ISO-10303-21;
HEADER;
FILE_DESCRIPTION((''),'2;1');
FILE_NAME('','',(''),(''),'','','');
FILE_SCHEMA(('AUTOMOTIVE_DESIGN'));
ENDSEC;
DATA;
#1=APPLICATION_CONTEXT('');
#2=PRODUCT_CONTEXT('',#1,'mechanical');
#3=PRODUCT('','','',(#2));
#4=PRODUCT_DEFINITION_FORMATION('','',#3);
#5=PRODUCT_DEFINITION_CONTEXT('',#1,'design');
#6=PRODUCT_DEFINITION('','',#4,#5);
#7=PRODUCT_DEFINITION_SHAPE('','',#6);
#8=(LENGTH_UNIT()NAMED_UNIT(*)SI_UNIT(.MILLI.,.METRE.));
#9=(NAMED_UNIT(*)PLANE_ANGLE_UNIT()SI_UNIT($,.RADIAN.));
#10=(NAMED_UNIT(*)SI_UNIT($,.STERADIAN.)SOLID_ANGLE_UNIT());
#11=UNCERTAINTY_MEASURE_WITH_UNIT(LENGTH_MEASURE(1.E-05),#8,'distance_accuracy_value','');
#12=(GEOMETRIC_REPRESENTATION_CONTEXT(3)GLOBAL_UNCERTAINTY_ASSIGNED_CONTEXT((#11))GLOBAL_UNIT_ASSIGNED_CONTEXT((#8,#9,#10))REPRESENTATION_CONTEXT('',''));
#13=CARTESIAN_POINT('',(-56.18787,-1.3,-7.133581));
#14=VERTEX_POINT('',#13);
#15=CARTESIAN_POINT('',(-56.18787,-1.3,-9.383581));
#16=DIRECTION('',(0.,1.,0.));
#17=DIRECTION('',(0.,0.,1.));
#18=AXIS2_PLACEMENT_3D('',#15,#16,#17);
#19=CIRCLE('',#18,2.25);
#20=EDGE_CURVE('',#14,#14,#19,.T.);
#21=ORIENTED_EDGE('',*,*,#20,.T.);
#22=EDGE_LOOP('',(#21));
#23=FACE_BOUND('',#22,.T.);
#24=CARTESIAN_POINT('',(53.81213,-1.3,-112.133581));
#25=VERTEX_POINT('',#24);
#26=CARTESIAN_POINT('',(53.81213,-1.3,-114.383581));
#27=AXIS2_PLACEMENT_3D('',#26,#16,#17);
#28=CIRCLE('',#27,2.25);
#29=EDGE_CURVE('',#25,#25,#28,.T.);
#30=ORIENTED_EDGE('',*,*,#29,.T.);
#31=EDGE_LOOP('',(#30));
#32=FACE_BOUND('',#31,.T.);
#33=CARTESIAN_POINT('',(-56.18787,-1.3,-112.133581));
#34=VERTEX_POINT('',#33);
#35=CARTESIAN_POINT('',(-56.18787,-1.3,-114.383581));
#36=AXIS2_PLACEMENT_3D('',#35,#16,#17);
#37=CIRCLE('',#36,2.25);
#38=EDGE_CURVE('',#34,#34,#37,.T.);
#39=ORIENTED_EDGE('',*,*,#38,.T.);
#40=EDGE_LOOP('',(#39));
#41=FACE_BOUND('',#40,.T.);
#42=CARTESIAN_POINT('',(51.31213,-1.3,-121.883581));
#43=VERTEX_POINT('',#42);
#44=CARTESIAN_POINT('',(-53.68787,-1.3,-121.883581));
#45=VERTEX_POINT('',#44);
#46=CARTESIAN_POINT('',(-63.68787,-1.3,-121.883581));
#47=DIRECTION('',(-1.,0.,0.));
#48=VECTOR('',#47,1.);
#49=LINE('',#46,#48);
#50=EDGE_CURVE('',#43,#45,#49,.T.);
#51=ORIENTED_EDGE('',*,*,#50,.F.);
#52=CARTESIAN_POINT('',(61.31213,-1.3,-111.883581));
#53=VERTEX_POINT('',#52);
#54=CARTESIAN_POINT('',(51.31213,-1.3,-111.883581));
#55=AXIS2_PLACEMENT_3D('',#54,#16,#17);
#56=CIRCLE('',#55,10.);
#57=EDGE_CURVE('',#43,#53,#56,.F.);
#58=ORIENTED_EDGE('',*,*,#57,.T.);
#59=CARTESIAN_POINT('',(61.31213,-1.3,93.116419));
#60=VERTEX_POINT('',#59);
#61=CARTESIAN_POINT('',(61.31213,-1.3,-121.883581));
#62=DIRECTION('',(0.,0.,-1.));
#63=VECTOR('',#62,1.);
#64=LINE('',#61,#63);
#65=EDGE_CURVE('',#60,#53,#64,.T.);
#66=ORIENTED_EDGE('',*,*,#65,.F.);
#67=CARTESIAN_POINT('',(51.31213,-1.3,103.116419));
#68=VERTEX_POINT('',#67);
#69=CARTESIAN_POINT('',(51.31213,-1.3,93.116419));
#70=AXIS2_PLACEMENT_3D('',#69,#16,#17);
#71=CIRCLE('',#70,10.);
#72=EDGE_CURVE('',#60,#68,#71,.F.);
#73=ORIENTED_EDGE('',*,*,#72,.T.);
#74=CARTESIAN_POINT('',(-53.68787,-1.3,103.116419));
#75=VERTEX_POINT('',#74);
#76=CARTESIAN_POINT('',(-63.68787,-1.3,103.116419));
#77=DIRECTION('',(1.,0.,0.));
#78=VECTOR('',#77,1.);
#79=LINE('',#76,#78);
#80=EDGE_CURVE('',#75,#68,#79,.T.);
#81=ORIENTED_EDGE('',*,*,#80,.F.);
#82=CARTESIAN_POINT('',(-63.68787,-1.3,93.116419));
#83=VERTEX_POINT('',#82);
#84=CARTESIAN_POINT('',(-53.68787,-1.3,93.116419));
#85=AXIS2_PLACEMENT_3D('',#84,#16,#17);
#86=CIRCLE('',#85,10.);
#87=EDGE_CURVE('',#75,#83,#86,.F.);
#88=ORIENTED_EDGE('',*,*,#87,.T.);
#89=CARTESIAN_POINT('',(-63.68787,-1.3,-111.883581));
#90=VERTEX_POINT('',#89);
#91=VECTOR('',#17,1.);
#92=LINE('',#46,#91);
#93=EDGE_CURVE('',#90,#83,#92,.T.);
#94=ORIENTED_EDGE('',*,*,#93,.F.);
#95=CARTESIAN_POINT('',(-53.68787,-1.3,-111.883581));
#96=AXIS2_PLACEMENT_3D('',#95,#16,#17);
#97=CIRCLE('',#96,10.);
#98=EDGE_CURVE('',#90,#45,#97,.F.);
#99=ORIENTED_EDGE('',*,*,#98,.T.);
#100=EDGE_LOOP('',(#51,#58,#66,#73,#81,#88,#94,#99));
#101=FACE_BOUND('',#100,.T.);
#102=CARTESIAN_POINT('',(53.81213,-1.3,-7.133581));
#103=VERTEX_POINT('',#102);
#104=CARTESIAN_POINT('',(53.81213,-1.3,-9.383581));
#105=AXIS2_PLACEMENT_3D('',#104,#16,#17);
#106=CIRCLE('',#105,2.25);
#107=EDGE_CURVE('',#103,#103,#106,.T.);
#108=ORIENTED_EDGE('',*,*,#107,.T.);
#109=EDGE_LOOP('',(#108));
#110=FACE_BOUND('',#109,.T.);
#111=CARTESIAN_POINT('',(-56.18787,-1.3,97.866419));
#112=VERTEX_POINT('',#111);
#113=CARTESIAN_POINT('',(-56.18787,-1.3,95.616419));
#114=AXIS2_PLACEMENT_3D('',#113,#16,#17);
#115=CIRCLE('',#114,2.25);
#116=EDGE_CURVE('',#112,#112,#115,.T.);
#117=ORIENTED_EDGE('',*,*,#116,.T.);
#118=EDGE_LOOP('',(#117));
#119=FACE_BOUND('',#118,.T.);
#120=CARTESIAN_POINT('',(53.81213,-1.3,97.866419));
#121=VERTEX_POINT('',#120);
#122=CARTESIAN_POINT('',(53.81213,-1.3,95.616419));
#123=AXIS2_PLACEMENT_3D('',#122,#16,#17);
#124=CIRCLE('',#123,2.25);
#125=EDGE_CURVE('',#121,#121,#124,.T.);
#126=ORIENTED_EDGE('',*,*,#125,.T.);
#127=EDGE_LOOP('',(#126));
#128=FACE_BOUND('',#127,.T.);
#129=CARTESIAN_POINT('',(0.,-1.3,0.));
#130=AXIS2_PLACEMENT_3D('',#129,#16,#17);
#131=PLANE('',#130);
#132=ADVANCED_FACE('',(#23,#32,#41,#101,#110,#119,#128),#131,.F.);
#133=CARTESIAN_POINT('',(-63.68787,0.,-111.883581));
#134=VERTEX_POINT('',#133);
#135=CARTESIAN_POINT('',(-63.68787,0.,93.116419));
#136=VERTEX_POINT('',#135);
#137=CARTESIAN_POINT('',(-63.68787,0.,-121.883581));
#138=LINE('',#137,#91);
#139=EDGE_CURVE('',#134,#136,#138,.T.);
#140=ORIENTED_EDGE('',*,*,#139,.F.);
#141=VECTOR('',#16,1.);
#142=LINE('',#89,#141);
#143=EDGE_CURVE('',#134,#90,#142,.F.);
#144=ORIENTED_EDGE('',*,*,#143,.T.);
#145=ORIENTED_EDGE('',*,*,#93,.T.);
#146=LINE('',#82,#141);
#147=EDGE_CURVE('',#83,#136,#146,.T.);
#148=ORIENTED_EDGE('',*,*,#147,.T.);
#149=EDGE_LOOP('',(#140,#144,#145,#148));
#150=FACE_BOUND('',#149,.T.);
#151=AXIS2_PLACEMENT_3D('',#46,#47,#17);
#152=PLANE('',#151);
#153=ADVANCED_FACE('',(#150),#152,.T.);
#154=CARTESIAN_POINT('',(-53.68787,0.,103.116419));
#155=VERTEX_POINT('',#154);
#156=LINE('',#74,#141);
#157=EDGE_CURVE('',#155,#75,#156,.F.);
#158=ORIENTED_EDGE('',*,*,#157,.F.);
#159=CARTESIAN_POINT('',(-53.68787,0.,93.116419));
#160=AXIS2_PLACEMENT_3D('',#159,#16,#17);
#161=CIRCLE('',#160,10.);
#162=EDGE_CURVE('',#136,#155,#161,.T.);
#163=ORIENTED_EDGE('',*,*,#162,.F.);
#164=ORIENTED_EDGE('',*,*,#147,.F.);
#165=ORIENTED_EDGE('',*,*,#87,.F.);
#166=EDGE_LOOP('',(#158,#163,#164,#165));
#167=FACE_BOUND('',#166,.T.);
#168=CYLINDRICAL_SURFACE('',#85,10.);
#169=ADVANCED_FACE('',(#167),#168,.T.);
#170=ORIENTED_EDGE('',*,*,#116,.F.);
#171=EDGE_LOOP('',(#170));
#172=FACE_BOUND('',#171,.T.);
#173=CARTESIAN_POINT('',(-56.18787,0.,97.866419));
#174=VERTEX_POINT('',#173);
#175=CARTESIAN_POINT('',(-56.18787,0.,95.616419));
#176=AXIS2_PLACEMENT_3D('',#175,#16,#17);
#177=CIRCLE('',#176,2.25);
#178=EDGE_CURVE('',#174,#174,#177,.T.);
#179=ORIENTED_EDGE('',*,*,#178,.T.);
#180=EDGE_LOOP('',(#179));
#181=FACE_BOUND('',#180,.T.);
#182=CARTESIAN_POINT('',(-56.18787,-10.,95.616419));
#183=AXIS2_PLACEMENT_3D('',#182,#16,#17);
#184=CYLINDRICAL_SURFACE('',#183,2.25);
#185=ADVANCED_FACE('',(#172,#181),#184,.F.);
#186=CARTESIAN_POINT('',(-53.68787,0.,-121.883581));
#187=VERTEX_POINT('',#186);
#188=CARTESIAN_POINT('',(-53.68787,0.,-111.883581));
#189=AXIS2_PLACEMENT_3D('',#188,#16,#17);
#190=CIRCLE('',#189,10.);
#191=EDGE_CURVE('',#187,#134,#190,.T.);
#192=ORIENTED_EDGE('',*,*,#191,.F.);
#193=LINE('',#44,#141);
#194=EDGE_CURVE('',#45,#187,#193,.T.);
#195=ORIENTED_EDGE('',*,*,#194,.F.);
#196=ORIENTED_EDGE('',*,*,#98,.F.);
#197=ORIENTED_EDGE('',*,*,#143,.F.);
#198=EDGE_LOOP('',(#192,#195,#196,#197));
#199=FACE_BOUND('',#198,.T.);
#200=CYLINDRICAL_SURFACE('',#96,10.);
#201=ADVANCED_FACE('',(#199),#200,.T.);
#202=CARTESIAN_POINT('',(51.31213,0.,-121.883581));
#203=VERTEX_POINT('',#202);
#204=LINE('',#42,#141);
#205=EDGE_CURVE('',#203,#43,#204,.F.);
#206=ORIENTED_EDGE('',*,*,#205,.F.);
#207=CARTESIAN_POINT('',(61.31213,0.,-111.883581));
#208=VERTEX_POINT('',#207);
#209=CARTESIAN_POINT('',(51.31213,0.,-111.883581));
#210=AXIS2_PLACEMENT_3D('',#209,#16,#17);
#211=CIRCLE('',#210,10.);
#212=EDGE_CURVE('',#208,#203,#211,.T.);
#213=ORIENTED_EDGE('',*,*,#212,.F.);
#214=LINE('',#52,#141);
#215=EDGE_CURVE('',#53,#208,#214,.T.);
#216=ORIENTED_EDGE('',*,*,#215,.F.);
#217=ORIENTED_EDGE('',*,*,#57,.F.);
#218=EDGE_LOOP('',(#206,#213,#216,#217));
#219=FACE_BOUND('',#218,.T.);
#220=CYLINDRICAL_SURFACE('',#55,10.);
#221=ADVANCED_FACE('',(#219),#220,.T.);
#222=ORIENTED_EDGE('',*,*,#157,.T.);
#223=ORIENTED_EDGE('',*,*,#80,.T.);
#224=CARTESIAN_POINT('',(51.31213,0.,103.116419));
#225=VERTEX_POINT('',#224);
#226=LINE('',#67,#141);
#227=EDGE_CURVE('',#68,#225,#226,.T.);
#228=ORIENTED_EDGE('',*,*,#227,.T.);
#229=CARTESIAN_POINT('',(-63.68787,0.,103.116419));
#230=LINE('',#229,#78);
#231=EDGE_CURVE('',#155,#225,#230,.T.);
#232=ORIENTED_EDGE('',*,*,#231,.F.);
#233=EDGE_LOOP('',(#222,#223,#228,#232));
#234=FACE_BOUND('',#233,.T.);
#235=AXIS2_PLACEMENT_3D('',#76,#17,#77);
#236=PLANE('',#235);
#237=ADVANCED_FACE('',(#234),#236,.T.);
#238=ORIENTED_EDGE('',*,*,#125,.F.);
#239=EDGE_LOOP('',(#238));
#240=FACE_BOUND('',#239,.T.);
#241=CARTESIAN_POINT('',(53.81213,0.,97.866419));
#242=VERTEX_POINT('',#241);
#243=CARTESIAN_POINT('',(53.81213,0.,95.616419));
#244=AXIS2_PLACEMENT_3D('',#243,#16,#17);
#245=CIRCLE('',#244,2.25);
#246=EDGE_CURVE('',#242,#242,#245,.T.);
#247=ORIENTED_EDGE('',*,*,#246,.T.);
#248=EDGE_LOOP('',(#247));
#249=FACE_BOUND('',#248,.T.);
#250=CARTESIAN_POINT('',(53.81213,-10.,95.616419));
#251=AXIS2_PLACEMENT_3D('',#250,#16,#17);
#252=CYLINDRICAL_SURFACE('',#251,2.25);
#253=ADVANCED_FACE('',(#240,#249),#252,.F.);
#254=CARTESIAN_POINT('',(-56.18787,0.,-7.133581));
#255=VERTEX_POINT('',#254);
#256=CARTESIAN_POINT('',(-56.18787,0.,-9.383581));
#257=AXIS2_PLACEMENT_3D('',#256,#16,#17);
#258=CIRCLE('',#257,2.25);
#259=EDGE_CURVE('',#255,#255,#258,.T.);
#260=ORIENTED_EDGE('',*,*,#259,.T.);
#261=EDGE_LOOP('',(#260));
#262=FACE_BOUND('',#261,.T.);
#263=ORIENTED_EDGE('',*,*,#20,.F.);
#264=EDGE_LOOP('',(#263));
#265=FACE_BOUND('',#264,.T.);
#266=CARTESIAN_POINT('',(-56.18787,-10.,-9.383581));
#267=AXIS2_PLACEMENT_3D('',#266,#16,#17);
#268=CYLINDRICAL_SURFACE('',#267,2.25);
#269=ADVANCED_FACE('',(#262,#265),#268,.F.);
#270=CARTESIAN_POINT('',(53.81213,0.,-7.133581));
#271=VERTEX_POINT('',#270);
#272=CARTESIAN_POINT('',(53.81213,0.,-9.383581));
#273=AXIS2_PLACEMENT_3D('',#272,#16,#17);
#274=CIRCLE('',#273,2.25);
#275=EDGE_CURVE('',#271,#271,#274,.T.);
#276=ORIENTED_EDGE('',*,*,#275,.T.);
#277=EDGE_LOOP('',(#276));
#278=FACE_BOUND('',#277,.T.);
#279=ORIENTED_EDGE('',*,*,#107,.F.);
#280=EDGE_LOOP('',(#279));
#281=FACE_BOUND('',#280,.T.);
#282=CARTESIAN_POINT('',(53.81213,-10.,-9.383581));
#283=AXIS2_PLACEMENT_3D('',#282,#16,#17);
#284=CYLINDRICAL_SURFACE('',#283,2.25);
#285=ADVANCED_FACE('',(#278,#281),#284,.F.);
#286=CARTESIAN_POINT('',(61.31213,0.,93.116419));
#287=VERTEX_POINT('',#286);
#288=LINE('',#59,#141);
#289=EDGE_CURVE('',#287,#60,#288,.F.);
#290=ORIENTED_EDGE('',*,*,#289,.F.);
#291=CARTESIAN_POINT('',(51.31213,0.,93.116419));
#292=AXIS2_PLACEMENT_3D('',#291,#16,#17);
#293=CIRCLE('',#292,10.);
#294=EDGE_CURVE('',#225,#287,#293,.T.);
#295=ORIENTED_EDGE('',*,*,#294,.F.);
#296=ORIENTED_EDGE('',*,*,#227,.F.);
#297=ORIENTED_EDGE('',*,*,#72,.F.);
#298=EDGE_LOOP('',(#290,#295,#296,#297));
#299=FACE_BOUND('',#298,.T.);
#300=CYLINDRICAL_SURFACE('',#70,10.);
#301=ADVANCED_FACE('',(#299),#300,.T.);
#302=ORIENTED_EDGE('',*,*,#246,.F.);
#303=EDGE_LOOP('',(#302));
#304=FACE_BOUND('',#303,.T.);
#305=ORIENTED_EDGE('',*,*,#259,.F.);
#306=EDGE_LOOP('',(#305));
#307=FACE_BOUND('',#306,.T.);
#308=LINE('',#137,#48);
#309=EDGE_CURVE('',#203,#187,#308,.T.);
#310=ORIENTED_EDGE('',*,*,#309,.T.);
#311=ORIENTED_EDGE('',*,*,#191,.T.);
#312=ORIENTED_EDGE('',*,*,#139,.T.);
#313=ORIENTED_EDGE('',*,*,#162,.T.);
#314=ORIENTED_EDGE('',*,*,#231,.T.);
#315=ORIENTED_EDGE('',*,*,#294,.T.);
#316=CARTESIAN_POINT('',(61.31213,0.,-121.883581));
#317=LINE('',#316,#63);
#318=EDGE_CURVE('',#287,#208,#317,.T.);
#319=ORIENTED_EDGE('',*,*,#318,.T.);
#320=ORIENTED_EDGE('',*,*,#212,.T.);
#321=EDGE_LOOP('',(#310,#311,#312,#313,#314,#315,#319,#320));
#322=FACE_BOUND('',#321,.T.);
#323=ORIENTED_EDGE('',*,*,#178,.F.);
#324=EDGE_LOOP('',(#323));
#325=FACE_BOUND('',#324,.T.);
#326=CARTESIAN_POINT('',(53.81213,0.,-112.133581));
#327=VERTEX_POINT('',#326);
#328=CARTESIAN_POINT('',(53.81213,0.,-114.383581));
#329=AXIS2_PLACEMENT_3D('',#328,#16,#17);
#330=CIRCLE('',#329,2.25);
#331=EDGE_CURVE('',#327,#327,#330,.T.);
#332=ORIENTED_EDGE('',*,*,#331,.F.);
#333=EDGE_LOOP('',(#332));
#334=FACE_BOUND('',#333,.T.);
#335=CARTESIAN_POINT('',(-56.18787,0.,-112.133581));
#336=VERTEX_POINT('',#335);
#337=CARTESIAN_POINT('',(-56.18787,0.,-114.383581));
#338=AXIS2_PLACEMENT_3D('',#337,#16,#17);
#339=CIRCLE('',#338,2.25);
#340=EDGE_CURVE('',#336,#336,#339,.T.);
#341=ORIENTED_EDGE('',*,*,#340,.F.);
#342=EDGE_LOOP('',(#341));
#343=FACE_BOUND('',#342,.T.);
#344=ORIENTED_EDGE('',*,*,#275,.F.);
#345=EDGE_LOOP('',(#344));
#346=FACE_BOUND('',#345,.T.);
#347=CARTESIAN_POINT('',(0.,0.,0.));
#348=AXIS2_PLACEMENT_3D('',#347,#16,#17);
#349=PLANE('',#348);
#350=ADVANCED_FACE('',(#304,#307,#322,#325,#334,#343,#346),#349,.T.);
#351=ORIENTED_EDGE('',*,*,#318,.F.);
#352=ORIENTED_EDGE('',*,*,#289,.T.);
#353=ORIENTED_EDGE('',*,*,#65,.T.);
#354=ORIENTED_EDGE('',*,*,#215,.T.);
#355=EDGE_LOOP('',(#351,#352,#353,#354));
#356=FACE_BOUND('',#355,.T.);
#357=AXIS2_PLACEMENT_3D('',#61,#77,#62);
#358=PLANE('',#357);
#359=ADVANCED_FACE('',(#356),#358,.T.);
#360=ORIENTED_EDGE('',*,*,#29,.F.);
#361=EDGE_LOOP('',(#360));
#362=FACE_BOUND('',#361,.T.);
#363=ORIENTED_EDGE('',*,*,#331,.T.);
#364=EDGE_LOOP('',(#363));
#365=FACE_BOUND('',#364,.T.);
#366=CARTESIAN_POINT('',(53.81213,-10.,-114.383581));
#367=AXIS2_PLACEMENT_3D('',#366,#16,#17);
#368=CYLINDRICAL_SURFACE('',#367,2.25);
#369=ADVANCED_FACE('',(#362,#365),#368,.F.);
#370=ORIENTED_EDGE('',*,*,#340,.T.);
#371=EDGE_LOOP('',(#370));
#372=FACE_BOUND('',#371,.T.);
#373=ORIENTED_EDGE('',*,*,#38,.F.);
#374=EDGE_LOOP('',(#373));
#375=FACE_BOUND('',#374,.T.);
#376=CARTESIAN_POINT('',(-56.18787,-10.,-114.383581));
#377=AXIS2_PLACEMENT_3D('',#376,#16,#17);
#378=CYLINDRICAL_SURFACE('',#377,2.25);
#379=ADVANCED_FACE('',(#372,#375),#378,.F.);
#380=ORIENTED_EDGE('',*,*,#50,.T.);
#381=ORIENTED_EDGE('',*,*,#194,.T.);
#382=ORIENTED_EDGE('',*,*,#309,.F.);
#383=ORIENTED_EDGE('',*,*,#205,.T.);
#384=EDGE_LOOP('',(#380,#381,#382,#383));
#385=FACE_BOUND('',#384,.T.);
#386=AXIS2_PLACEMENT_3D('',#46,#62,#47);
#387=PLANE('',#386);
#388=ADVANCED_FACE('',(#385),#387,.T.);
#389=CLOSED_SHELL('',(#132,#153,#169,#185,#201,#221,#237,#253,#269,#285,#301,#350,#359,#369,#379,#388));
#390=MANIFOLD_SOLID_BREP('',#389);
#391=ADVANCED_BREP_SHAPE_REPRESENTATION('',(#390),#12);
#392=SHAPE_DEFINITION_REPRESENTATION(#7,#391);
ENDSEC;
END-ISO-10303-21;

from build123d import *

# Parameters (mm, degrees)
SKETCH1_W          = 125
SKETCH1_H          = 225
BASE_FLANGE1_DEPTH = 1.3
SKETCH6_R          = 2.25
CUT_EXTRUDE1_DEPTH = 10
FILLET1_R          = 10


# Sheet-metal steps are written as plain solids
with BuildPart() as part:
    # Sketch1 → Base-Flange1 (new body)
    with BuildSketch(Plane(origin=(0, 0, 0), x_dir=(1, 0, 0), z_dir=(0, 1, 0))):
        with Locations((-1.187869711, 9.383580575)):
            Rectangle(SKETCH1_W, SKETCH1_H)
    extrude(amount=-BASE_FLANGE1_DEPTH)

    # Sketch6 → Cut-Extrude1 (cut)
    with BuildSketch(Plane(origin=(0, 0, 0), x_dir=(1, 0, 0), z_dir=(0, 1, 0))):
        with Locations(Location((53.812130289, 114.383580575, 0), (0, 0, 270))):
            Circle(SKETCH6_R)
        with Locations(Location((53.812130289, -95.616419425, 0), (0, 0, 270))):
            Circle(SKETCH6_R)
        with Locations(Location((-56.187869711, -95.616419425, 0), (0, 0, 270))):
            Circle(SKETCH6_R)
        with Locations(Location((-56.187869711, 114.383580575, 0), (0, 0, 270))):
            Circle(SKETCH6_R)
        with Locations(Location((53.812130289, 9.383580575, 0), (0, 0, 270))):
            Circle(SKETCH6_R)
        with Locations(Location((-56.187869711, 9.383580575, 0), (0, 0, 270))):
            Circle(SKETCH6_R)
    extrude(amount=-CUT_EXTRUDE1_DEPTH, mode=Mode.SUBTRACT)

    # Fillet1
    fillet1_edges = [part.edges().sort_by_distance(p)[0] for p in [
        (61.312130289, -0.65, 103.116419425),
        (-63.687869711, -0.65, 103.116419425),
        (-63.687869711, -0.65, -121.883580575),
        (61.312130289, -0.65, -121.883580575),
    ]]
    fillet(fillet1_edges, radius=FILLET1_R)


solid = part.part
